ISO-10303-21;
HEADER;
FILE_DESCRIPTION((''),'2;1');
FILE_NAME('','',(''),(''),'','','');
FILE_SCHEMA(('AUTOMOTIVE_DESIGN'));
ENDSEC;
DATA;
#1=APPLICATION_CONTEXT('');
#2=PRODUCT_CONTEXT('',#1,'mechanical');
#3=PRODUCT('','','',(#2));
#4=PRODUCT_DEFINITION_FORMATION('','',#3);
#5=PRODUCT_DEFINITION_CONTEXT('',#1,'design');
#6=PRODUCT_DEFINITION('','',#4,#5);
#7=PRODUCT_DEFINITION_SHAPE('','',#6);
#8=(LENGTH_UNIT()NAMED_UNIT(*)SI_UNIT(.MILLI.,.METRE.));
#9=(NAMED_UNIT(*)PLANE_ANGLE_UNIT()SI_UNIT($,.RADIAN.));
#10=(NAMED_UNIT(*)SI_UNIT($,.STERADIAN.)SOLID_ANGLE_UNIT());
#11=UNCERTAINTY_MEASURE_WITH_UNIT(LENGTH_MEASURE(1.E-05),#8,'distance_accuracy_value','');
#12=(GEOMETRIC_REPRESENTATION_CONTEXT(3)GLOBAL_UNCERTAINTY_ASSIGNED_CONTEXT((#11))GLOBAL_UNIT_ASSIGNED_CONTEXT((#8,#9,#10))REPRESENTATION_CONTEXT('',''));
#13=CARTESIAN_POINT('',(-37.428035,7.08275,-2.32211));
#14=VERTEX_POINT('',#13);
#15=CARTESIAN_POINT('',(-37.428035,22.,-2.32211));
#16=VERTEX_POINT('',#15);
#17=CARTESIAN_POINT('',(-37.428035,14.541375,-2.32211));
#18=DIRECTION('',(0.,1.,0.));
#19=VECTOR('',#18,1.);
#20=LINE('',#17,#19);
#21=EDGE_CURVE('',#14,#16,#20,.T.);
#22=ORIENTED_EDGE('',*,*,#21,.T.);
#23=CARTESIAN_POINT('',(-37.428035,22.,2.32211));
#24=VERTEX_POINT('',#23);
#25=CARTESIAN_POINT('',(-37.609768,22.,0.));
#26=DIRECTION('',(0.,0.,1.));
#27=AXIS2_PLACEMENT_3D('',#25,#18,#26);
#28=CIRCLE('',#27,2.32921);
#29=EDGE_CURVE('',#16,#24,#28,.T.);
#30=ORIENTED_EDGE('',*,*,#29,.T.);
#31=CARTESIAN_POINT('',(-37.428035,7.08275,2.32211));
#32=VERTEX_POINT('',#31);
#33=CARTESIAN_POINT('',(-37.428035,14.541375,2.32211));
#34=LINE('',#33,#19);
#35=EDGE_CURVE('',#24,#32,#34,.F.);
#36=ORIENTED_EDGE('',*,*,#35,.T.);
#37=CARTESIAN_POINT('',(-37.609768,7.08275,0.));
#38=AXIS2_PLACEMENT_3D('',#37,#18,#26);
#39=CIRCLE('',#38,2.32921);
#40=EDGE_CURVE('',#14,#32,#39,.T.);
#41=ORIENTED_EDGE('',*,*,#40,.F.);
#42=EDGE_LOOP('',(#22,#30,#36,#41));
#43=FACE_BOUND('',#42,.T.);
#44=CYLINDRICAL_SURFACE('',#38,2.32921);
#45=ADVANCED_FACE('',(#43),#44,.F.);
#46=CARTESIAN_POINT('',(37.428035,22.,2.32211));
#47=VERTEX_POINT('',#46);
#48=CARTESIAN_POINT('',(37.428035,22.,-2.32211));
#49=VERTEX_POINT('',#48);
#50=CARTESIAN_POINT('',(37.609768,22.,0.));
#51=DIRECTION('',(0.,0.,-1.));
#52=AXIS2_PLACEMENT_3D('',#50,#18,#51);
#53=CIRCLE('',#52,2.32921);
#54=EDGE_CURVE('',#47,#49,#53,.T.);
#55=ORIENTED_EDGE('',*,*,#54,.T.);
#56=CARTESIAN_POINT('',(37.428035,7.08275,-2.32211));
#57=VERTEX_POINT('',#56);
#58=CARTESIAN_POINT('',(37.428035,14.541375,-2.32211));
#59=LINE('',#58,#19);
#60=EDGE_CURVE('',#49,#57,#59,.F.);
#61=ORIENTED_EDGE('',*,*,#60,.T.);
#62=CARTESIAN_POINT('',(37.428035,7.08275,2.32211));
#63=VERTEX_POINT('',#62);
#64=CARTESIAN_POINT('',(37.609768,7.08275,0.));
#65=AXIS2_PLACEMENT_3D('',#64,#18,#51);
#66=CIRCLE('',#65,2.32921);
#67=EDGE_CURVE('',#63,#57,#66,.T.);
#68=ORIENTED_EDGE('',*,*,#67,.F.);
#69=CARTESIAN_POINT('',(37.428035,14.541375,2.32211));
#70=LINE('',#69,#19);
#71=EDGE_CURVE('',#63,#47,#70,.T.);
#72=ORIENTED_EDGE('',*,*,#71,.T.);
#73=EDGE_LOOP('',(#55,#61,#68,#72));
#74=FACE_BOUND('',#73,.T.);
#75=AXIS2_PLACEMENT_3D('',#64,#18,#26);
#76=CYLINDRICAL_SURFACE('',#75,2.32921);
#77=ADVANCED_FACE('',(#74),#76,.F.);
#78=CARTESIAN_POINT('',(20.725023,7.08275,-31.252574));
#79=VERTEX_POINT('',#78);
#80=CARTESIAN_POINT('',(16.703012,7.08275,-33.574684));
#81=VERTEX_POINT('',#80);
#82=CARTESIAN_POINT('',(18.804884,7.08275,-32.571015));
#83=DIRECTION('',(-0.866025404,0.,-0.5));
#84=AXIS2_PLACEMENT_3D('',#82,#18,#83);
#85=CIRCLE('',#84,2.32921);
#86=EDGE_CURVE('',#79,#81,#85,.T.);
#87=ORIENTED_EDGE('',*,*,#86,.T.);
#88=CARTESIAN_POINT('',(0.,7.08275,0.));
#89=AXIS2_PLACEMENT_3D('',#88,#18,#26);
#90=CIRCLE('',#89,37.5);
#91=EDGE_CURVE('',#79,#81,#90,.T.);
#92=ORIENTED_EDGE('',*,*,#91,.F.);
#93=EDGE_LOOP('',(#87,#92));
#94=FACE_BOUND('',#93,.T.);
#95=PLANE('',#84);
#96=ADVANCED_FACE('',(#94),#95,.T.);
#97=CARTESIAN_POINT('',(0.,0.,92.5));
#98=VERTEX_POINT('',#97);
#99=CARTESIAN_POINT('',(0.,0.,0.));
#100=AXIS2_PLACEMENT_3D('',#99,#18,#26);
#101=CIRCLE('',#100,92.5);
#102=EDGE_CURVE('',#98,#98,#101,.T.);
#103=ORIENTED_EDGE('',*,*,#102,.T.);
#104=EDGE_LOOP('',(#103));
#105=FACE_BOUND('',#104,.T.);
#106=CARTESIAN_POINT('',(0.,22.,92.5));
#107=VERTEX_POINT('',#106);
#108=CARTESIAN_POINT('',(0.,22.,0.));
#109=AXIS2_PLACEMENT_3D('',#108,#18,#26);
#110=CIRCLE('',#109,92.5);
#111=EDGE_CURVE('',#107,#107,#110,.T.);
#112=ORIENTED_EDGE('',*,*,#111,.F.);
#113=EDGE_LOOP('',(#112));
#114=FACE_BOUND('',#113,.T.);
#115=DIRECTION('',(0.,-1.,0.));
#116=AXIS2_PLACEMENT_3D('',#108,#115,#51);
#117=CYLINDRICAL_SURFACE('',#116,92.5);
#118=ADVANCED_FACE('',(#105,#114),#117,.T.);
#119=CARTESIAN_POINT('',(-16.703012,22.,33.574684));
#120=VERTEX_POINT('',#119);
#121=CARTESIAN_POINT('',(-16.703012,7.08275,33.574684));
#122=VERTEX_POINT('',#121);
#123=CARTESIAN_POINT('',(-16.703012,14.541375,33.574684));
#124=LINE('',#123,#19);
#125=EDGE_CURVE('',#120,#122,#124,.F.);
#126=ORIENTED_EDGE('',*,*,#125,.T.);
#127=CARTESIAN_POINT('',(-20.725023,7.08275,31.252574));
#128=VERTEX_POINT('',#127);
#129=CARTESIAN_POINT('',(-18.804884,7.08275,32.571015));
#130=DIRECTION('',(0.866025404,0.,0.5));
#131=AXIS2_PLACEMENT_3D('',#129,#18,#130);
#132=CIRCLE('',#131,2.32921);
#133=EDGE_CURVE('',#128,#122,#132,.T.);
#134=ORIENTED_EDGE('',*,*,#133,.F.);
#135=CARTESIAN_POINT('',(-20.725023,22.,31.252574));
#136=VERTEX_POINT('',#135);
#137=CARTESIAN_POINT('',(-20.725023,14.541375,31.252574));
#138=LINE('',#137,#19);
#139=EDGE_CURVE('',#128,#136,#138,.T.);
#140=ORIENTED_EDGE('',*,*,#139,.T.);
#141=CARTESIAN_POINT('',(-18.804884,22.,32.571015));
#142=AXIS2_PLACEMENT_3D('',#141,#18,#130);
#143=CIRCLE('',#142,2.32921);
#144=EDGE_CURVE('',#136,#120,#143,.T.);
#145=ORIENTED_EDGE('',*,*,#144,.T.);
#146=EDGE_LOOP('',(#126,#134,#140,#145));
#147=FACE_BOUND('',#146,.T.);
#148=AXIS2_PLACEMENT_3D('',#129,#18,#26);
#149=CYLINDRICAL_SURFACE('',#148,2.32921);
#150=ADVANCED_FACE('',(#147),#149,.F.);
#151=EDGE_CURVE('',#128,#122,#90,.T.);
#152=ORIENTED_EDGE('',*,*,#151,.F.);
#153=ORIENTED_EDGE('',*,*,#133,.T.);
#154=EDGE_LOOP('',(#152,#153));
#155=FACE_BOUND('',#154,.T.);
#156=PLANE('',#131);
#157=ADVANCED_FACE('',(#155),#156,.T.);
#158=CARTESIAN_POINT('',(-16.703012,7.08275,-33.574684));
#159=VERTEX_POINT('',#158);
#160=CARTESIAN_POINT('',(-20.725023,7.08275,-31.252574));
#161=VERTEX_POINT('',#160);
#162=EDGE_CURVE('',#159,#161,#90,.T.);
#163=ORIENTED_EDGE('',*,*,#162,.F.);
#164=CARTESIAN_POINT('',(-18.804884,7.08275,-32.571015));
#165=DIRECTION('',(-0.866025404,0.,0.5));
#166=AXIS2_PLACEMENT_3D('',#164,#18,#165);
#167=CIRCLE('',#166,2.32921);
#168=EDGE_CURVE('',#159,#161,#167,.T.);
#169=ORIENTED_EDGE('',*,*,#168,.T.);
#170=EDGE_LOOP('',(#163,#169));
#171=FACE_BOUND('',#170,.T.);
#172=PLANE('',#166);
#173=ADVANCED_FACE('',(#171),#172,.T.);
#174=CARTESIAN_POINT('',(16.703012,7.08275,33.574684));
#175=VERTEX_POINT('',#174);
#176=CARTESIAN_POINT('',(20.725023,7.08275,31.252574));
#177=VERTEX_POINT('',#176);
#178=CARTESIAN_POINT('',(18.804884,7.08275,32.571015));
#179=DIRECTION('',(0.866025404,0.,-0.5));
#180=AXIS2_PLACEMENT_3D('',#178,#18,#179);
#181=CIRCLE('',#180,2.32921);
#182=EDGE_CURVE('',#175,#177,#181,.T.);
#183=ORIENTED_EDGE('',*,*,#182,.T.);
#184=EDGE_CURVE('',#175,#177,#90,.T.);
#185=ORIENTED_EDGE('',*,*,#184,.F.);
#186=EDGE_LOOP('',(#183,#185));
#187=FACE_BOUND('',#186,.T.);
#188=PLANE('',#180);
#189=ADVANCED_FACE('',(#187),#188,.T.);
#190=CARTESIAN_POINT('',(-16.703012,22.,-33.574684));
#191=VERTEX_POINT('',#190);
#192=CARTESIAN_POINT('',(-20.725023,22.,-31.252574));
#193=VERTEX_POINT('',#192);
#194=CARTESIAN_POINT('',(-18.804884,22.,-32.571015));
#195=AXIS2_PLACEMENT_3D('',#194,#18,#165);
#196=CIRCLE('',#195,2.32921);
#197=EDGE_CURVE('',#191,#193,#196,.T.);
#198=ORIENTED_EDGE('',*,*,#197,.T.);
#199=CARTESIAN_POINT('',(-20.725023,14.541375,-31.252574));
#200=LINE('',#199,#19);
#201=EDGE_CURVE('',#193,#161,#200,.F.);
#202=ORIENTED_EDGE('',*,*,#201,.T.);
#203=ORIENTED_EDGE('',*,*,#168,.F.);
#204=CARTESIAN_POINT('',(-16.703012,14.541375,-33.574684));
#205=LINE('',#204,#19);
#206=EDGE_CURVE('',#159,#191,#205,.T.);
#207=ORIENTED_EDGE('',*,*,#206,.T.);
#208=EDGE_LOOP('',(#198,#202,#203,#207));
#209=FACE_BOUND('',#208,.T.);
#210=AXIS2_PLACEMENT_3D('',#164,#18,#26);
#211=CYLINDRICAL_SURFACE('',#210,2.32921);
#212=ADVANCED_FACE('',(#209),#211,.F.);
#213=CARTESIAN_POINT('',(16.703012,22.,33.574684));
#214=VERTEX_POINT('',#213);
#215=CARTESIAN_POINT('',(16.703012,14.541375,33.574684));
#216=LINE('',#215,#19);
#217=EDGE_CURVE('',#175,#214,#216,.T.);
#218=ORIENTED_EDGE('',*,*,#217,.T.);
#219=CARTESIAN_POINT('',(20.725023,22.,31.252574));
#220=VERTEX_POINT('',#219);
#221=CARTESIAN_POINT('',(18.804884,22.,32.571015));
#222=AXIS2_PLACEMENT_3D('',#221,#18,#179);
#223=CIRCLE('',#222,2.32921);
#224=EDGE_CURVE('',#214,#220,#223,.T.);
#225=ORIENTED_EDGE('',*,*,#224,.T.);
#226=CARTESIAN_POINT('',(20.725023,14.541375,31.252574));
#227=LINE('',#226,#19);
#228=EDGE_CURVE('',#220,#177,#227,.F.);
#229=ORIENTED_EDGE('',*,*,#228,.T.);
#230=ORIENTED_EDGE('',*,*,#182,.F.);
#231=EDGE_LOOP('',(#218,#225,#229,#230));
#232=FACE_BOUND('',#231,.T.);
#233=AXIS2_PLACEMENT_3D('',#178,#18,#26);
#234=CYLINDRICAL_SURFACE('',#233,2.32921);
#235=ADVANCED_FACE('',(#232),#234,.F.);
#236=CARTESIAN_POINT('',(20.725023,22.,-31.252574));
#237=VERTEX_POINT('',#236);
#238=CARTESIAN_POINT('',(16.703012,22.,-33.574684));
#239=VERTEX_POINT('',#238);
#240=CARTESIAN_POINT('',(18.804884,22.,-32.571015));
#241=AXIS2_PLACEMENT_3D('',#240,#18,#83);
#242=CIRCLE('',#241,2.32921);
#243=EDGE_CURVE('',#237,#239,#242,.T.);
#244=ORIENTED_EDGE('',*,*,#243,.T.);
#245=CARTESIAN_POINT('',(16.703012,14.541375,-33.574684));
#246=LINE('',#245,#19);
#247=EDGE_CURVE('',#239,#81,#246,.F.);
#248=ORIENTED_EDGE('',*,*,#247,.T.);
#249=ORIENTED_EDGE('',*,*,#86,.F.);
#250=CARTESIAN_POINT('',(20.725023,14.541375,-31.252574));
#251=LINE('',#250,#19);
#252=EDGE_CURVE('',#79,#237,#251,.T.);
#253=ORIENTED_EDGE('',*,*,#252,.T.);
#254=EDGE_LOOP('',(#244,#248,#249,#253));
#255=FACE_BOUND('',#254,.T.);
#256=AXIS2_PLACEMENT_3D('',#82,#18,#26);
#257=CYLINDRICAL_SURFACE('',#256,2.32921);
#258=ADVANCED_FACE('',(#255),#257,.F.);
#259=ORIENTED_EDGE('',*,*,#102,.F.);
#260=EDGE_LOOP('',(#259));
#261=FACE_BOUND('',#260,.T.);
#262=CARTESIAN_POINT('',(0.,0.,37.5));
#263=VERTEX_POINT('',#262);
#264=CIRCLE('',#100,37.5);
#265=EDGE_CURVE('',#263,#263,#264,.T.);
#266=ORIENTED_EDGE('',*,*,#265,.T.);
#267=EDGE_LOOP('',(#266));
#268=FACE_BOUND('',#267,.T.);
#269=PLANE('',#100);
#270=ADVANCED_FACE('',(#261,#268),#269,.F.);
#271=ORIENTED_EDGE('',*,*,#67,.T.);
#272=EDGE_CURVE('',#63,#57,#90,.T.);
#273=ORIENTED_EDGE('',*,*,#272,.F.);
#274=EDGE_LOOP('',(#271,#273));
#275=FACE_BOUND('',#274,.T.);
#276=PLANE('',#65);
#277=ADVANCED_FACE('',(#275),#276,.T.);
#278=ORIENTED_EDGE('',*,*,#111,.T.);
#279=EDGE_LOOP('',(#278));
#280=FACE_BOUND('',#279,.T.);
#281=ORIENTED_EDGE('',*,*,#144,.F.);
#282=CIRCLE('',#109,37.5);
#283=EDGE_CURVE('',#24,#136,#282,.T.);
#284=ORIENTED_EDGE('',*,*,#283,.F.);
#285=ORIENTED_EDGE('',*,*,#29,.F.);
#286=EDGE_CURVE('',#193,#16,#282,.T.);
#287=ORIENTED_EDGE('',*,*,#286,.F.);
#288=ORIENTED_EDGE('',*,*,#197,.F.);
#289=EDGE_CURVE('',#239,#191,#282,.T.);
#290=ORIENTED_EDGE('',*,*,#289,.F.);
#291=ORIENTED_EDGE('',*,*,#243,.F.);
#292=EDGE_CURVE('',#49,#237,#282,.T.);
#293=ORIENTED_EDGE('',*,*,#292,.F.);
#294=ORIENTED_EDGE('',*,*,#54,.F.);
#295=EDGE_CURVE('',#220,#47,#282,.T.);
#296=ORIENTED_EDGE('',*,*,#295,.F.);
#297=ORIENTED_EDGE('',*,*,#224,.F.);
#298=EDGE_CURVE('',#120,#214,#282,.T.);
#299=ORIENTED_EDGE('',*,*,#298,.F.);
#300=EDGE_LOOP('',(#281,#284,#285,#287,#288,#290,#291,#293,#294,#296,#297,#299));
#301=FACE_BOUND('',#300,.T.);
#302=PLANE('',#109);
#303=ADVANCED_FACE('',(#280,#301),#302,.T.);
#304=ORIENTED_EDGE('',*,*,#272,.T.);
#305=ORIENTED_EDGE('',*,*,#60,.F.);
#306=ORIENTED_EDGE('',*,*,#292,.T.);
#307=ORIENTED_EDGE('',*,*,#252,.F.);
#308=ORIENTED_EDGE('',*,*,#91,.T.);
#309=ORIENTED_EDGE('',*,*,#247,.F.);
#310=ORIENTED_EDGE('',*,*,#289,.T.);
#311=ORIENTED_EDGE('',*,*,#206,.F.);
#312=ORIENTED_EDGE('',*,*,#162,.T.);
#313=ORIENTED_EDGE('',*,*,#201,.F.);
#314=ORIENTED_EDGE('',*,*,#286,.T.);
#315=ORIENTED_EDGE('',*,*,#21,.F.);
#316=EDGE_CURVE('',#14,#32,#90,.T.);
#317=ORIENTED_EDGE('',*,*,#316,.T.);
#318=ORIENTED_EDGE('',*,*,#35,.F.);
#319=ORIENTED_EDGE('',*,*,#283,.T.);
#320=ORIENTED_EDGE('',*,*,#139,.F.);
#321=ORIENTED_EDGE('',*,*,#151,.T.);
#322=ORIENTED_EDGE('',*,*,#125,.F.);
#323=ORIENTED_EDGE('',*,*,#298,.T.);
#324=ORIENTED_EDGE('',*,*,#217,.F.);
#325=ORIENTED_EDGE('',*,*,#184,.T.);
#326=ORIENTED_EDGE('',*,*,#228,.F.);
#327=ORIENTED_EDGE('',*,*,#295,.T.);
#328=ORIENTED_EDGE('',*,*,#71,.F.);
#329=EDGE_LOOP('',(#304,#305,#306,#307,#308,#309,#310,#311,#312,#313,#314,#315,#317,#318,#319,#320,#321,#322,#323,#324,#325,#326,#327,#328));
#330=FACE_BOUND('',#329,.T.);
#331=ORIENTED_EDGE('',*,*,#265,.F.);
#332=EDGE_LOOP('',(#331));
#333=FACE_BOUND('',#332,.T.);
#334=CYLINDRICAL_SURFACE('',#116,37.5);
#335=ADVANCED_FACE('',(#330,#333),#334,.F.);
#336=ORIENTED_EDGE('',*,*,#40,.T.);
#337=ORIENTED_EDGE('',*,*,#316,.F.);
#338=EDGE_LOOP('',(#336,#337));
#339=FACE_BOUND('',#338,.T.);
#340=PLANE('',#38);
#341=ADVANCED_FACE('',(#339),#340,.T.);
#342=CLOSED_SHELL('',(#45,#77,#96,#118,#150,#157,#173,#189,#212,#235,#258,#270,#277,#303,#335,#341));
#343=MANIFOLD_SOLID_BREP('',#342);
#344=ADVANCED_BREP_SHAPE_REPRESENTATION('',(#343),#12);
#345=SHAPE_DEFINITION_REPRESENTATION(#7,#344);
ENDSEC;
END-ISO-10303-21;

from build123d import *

# Parameters (mm, degrees)
SKETCH1_R           = 92.5
BOSS_EXTRUDE1_DEPTH = 22
SKETCH2_R           = 37.5
CUT_EXTRUDE1_DEPTH  = 133.651799837
SKETCH3_R           = 2.329210113
CUT_EXTRUDE2_DEPTH  = 14.91724955
CIRPATTERN1_COUNT   = 6


with BuildPart() as part:
    # Sketch1 → Boss-Extrude1 (new body)
    with BuildSketch(Plane(origin=(0, 0, 0), x_dir=(1, 0, 0), z_dir=(0, 1, 0))):
        Circle(SKETCH1_R)
    extrude(amount=BOSS_EXTRUDE1_DEPTH)

    # Sketch2 → Cut-Extrude1 (cut, through all)
    with BuildSketch(Plane(origin=(0, 0, 0), x_dir=(1, 0, 0), z_dir=(0, 1, 0))):
        Circle(SKETCH2_R)
    extrude(amount=CUT_EXTRUDE1_DEPTH, mode=Mode.SUBTRACT)

    # Sketch3 → Cut-Extrude2 (cut)
    with BuildSketch(Plane(origin=(0, 22, 0), x_dir=(1, 0, 0), z_dir=(0, 1, 0))):
        with Locations((-37.609768481, 0)):
            Circle(SKETCH3_R)
    cut_extrude2 = extrude(amount=-CUT_EXTRUDE2_DEPTH, mode=Mode.SUBTRACT)

    # CirPattern1: Cut-Extrude2 ×6 about axis
    cirpattern1_axis = Axis((0, 0, 0), (0, 1, 0))
    for i in range(1, CIRPATTERN1_COUNT):
        add(cut_extrude2.rotate(cirpattern1_axis, i * 360 / CIRPATTERN1_COUNT), mode=Mode.SUBTRACT)


solid = part.part
